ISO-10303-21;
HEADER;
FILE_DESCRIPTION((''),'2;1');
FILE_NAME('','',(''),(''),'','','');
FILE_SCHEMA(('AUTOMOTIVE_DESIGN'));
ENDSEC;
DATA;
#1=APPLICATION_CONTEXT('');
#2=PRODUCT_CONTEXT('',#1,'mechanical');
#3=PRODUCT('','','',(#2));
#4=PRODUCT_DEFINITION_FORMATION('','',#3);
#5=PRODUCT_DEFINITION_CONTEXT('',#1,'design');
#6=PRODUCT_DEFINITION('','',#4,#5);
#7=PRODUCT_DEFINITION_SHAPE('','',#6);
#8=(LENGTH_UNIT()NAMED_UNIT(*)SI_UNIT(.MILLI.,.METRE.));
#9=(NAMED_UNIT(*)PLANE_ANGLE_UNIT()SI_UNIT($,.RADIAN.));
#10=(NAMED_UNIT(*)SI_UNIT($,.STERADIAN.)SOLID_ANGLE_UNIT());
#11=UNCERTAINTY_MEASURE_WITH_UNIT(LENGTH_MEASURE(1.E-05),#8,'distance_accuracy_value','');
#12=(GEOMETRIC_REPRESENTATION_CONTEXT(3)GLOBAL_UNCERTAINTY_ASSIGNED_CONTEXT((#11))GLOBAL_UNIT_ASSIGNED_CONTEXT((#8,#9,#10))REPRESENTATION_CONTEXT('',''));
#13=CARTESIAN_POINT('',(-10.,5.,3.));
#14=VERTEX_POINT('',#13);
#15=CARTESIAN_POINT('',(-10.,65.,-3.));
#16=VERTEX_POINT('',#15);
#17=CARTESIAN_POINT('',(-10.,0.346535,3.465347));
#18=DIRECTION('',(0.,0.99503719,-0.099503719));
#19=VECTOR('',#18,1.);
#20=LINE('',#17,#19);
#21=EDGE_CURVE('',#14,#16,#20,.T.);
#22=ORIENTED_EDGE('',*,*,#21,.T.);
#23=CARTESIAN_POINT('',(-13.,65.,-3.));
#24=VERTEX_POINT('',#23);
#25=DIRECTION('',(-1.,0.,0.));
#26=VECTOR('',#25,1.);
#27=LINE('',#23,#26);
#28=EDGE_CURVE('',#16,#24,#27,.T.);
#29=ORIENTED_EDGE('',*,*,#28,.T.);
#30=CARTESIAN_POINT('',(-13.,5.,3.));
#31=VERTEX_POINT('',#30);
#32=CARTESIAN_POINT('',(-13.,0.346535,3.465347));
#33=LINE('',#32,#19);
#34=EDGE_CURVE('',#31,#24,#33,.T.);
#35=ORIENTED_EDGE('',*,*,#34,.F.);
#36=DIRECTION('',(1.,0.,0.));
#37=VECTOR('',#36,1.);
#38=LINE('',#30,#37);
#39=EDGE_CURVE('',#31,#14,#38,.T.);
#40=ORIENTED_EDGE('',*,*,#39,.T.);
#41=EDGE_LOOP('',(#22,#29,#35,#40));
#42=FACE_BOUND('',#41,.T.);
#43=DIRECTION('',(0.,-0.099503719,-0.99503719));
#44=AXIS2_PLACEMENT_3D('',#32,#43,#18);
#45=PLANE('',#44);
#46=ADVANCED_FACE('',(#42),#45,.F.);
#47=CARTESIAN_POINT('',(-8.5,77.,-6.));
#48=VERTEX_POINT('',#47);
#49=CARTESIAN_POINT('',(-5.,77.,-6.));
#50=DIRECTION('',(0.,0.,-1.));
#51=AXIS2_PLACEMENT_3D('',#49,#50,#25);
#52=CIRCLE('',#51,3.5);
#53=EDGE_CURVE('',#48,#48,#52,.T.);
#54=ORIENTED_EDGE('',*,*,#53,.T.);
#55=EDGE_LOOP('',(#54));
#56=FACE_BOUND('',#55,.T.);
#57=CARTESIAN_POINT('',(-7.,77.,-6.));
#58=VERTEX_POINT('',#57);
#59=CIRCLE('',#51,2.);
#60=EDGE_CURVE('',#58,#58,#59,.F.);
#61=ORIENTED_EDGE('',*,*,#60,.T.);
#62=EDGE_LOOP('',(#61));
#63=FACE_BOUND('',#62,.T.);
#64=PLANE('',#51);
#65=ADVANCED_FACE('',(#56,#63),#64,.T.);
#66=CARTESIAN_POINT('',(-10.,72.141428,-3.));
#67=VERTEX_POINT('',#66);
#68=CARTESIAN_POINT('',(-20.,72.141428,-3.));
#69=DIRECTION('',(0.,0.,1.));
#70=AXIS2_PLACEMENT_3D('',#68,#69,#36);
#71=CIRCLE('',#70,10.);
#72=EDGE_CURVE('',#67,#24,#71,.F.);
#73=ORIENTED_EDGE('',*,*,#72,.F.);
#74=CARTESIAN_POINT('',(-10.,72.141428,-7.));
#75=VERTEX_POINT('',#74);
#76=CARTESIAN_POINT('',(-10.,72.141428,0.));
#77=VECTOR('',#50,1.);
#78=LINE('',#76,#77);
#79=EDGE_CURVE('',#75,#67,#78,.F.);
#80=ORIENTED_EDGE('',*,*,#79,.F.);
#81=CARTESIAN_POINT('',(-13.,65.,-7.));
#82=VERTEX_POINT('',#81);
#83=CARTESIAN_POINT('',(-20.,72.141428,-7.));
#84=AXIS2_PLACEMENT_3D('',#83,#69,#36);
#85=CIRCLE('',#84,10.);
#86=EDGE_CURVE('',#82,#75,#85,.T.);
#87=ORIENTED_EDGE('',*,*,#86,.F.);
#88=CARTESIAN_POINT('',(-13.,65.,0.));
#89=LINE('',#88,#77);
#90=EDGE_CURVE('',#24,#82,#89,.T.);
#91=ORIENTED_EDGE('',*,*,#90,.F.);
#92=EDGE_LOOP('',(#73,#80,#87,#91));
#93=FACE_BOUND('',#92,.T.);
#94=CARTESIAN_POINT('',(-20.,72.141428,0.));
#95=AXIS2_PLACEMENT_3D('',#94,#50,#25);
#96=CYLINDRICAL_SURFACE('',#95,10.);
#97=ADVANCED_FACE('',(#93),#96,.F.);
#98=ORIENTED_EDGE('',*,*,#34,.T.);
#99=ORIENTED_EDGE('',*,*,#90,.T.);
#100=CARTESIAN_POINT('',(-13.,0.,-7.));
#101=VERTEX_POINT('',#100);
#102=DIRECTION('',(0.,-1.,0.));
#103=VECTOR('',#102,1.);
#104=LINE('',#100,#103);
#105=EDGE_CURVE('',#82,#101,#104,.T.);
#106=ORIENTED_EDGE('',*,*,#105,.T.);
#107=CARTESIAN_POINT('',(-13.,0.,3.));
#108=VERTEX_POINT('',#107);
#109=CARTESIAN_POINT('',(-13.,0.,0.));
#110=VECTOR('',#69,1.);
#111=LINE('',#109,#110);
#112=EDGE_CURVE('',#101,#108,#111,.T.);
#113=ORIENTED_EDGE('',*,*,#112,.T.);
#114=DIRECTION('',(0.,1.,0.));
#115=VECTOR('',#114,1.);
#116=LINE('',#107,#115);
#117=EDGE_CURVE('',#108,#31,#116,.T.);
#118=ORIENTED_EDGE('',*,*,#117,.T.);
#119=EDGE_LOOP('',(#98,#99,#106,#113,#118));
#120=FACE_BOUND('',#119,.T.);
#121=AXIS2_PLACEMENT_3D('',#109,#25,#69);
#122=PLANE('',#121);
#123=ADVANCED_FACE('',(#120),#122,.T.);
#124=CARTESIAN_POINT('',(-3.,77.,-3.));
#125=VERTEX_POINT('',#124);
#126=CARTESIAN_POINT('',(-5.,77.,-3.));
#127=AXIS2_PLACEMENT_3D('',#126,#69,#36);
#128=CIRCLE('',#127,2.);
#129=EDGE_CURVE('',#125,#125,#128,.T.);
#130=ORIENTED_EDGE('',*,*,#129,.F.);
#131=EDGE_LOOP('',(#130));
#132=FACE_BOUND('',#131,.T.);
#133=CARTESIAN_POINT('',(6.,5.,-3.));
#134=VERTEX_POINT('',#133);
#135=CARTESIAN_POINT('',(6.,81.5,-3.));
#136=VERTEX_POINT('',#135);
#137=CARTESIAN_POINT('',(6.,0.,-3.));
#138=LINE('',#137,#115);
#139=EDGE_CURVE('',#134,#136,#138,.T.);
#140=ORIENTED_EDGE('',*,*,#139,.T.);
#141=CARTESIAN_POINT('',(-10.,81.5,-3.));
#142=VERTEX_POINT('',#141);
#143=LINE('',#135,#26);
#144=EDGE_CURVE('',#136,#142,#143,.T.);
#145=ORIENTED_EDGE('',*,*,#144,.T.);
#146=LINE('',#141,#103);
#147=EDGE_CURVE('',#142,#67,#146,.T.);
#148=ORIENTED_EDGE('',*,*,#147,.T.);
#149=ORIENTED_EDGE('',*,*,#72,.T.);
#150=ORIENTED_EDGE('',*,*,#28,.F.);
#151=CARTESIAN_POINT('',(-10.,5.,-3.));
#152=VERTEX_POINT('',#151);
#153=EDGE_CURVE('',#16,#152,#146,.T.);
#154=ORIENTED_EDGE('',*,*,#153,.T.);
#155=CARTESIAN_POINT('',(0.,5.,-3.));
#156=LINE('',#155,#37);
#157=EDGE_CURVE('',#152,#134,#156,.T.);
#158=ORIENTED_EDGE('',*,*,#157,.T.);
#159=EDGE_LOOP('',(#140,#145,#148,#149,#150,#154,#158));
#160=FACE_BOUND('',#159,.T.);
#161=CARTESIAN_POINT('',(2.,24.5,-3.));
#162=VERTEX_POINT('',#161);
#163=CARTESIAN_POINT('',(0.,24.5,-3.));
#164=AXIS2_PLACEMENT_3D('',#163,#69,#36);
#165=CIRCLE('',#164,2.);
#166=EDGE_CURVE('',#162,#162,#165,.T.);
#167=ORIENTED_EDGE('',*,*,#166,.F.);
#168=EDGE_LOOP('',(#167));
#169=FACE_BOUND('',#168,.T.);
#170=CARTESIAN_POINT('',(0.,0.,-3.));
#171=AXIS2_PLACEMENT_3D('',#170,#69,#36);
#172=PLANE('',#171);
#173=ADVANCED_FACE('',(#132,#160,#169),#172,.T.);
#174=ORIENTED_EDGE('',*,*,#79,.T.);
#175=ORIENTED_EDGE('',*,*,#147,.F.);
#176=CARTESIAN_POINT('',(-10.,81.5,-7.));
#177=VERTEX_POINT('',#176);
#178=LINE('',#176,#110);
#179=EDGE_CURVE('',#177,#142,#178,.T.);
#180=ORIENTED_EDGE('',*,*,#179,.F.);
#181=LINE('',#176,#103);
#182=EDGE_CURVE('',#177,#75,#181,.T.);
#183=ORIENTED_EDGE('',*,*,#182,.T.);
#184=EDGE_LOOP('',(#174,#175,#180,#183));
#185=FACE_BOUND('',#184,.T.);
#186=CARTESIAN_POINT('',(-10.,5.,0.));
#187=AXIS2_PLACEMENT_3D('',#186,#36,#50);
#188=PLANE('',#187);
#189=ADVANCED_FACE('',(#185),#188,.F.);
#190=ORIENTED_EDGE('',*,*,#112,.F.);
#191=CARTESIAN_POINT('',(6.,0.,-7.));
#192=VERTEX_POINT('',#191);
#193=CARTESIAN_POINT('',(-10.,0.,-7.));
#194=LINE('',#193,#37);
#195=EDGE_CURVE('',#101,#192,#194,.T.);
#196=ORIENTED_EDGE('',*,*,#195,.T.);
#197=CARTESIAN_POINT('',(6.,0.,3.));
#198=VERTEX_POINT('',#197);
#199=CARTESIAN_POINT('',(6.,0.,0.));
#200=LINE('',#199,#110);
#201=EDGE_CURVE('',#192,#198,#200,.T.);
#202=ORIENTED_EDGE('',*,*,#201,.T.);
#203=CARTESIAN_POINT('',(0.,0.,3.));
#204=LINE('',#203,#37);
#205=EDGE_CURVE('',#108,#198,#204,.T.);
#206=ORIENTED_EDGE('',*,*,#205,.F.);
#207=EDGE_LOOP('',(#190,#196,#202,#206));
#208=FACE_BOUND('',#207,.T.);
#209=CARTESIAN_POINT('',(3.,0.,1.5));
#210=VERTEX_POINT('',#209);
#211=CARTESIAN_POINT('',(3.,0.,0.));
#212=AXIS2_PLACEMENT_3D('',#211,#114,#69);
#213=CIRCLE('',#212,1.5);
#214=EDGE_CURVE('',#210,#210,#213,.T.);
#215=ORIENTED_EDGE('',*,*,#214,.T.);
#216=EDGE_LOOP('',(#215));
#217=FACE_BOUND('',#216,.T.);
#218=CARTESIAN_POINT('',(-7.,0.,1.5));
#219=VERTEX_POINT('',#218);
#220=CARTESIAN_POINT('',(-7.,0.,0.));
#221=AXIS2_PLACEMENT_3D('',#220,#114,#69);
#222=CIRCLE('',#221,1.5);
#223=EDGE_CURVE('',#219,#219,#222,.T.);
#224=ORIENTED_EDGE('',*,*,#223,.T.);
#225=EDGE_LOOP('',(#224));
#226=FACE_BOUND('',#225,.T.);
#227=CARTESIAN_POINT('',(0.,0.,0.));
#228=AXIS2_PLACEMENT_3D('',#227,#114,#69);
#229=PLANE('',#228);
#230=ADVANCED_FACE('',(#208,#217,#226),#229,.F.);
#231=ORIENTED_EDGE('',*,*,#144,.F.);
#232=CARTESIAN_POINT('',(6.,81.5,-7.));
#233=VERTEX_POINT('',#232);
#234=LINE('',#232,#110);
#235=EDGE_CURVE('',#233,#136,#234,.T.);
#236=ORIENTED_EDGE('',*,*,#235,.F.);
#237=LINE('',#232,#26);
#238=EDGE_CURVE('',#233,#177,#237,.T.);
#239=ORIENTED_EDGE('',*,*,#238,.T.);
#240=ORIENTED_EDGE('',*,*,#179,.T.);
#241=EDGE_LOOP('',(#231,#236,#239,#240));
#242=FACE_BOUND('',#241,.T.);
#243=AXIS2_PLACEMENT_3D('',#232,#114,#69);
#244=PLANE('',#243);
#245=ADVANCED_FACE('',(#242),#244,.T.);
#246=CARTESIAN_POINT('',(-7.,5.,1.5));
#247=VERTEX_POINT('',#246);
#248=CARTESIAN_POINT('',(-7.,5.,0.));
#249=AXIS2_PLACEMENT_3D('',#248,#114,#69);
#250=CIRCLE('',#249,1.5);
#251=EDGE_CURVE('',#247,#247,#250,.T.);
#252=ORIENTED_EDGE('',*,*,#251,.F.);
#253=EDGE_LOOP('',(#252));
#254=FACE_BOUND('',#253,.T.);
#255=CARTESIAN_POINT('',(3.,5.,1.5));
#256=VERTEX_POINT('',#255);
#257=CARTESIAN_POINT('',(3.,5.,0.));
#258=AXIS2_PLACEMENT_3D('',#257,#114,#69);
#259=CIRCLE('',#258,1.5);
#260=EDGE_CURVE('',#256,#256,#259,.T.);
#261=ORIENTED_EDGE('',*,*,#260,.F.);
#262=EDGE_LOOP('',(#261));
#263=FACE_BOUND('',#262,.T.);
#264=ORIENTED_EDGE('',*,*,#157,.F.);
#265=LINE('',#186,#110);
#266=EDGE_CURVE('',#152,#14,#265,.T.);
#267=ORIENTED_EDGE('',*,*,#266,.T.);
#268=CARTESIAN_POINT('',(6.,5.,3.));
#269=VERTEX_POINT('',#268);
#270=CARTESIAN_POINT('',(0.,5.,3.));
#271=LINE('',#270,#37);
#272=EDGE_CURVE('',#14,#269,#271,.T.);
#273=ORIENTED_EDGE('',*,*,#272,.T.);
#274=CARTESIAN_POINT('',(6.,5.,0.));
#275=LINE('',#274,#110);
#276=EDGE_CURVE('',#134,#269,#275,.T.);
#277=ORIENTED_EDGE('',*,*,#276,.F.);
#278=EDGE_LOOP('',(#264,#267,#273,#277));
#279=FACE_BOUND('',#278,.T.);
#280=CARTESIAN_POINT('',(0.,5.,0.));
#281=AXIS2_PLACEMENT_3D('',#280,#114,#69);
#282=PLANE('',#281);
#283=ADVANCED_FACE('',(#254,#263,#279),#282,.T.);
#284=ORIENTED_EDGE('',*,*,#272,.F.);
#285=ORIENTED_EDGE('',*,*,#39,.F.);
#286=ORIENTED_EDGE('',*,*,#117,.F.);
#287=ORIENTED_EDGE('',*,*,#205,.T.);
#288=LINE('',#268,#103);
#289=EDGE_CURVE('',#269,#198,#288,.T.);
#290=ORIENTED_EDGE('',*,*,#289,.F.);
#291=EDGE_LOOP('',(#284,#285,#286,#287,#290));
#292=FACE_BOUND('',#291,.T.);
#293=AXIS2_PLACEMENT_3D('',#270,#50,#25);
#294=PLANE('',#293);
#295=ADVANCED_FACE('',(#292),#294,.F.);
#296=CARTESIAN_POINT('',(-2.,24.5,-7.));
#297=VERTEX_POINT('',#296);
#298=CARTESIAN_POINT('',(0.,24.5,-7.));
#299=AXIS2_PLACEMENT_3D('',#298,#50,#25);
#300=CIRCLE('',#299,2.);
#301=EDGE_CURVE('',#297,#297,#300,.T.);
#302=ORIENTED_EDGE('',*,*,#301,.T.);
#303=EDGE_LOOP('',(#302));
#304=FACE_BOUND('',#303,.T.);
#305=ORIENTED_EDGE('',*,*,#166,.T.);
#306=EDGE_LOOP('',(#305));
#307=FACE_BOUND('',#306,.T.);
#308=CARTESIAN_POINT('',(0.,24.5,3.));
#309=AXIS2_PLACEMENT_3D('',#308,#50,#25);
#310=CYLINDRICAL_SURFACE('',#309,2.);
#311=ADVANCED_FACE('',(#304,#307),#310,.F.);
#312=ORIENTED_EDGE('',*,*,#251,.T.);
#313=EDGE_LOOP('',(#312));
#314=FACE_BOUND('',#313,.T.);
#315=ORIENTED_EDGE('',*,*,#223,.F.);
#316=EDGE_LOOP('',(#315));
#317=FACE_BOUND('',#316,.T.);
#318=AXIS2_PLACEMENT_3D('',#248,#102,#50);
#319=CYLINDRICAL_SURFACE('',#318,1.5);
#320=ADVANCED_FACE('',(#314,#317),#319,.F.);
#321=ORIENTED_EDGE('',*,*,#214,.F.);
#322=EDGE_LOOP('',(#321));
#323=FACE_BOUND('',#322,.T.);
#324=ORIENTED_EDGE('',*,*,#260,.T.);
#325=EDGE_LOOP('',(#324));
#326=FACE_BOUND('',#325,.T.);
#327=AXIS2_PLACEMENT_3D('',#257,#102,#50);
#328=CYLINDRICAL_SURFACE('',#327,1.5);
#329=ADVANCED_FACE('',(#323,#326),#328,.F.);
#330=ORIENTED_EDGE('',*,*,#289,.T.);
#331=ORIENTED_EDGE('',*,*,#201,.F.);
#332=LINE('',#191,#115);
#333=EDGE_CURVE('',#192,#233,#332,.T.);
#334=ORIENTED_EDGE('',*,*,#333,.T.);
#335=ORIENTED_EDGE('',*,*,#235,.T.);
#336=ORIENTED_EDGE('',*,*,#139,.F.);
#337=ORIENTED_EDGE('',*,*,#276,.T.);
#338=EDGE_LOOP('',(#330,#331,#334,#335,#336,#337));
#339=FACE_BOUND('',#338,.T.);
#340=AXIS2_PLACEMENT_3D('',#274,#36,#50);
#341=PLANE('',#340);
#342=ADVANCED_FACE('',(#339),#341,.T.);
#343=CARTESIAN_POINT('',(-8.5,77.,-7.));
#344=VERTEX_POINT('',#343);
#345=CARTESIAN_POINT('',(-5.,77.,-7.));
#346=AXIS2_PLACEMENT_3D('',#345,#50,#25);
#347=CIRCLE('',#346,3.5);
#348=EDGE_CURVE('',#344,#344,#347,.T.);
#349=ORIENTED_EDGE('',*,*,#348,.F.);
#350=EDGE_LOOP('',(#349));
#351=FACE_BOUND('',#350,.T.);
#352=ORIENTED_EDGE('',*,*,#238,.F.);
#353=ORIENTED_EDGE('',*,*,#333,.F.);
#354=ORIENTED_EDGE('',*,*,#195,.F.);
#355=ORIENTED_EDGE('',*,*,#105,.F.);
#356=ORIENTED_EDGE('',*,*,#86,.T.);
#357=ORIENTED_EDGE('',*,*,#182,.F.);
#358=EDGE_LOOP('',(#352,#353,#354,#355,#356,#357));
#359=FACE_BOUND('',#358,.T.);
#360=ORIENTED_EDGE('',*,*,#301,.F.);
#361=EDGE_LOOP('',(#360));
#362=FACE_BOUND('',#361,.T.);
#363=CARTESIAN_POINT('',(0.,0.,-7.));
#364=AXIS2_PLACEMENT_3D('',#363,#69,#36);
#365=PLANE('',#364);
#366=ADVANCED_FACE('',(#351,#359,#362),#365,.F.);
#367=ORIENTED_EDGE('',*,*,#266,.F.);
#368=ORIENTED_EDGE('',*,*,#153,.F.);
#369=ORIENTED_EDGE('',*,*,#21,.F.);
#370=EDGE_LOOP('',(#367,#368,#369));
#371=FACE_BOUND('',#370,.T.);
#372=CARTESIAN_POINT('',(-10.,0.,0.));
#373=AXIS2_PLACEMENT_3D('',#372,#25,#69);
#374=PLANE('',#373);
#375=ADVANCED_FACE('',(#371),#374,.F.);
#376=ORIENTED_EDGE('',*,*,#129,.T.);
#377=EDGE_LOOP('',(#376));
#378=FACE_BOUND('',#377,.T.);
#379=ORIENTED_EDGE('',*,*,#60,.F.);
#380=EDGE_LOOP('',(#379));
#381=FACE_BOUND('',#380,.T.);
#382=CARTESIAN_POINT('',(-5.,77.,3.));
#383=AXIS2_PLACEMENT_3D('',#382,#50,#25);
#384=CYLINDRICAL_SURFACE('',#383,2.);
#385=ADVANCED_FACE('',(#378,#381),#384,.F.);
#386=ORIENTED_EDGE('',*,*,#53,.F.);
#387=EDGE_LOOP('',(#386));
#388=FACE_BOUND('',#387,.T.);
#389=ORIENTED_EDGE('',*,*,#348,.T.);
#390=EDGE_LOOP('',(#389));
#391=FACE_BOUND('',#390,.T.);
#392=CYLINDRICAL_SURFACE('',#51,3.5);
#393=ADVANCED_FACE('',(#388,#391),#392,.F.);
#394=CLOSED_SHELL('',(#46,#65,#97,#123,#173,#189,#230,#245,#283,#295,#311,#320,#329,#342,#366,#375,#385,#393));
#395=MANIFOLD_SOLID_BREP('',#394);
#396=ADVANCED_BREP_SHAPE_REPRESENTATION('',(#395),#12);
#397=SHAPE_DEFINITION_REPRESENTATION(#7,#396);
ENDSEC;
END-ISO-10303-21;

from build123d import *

# Parameters (mm, degrees)
SKETCH_1_W          = 16
SKETCH_1_H          = 6
SKETCH_1_R          = 1.5
EXTRUDE_1_DEPTH     = 5
SKETCH_2_W          = 16
SKETCH_2_H          = 81.5
EXTRUDE_2_DEPTH     = 4
SKETCH_3_R          = 2
CUT_EXTRUDE_1_DEPTH = 83.717894074
SKETCH_4_R          = 2
CUT_EXTRUDE_2_DEPTH = 83.717894074
SKETCH_5_R          = 3.5
CUT_EXTRUDE_3_DEPTH = 1
EXTRUDE_3_DEPTH     = 3
FILLET_1_R          = 10


with BuildPart() as part:
    # 草图1 → 凸台-拉伸1 (new body)
    with BuildSketch(Plane(origin=(0, 0, 0), x_dir=(1, 0, 0), z_dir=(0, 1, 0))):
        with Locations((-2, 0)):
            Rectangle(SKETCH_1_W, SKETCH_1_H)
        with Locations(Location((-7, 0, 0), (0, 0, 270))):
            Circle(SKETCH_1_R, mode=Mode.SUBTRACT)
        with Locations(Location((3, 0, 0), (0, 0, 270))):
            Circle(SKETCH_1_R, mode=Mode.SUBTRACT)
    extrude(amount=EXTRUDE_1_DEPTH)

    # 草图2 → 凸台-拉伸2 (add)
    with BuildSketch(Plane(origin=(0, 0, -3), x_dir=(-1, 0, 0), z_dir=(0, 0, -1))):
        with Locations((2, 40.75)):
            Rectangle(SKETCH_2_W, SKETCH_2_H)
    extrude(amount=EXTRUDE_2_DEPTH)

    # 草图3 → 切除-拉伸1 (cut, through all)
    with BuildSketch(Plane(origin=(0, 0, -7), x_dir=(-1, 0, 0), z_dir=(0, 0, -1))):
        with Locations((5, 77)):
            Circle(SKETCH_3_R)
    extrude(amount=-CUT_EXTRUDE_1_DEPTH, mode=Mode.SUBTRACT)

    # 草图4 → 切除-拉伸2 (cut, through all)
    with BuildSketch(Plane(origin=(0, 0, -7), x_dir=(-1, 0, 0), z_dir=(0, 0, -1))):
        with Locations((0, 24.5)):
            Circle(SKETCH_4_R)
    extrude(amount=-CUT_EXTRUDE_2_DEPTH, mode=Mode.SUBTRACT)

    # 草图5 → 切除-拉伸3 (cut)
    with BuildSketch(Plane(origin=(0, 0, -7), x_dir=(-1, 0, 0), z_dir=(0, 0, -1))):
        with Locations((5, 77)):
            Circle(SKETCH_5_R)
    extrude(amount=-CUT_EXTRUDE_3_DEPTH, mode=Mode.SUBTRACT)

    # 草图6 → 凸台-拉伸3 (add)
    with BuildSketch(Plane.ZY.offset(10)):
        Polygon((3, 5), (-3, 5), (-3, 65), (-7, 65), (-7, 0), (3, 0), align=None)
        Polygon((-3, 65), (-3, 5), (3, 5), align=None)
    extrude(amount=EXTRUDE_3_DEPTH)

    # 圆角1
    # the kernel refuses this fillet: 10 mm, written as the material it adds along each edge
    with BuildSketch(Plane(origin=(-10, 65, -3), x_dir=(-1, 0, 0), z_dir=(0, 0, -1))) as fillet_1_piece_1:
        with BuildLine():
            CenterArc((10, 7.141428429), FILLET_1_R, 180, 45.572995999)
            Line((0, 7.141428429), (0, 0))
            Line((0, 0), (3, 0))
        make_face()
    extrude(amount=4)


solid = part.part
